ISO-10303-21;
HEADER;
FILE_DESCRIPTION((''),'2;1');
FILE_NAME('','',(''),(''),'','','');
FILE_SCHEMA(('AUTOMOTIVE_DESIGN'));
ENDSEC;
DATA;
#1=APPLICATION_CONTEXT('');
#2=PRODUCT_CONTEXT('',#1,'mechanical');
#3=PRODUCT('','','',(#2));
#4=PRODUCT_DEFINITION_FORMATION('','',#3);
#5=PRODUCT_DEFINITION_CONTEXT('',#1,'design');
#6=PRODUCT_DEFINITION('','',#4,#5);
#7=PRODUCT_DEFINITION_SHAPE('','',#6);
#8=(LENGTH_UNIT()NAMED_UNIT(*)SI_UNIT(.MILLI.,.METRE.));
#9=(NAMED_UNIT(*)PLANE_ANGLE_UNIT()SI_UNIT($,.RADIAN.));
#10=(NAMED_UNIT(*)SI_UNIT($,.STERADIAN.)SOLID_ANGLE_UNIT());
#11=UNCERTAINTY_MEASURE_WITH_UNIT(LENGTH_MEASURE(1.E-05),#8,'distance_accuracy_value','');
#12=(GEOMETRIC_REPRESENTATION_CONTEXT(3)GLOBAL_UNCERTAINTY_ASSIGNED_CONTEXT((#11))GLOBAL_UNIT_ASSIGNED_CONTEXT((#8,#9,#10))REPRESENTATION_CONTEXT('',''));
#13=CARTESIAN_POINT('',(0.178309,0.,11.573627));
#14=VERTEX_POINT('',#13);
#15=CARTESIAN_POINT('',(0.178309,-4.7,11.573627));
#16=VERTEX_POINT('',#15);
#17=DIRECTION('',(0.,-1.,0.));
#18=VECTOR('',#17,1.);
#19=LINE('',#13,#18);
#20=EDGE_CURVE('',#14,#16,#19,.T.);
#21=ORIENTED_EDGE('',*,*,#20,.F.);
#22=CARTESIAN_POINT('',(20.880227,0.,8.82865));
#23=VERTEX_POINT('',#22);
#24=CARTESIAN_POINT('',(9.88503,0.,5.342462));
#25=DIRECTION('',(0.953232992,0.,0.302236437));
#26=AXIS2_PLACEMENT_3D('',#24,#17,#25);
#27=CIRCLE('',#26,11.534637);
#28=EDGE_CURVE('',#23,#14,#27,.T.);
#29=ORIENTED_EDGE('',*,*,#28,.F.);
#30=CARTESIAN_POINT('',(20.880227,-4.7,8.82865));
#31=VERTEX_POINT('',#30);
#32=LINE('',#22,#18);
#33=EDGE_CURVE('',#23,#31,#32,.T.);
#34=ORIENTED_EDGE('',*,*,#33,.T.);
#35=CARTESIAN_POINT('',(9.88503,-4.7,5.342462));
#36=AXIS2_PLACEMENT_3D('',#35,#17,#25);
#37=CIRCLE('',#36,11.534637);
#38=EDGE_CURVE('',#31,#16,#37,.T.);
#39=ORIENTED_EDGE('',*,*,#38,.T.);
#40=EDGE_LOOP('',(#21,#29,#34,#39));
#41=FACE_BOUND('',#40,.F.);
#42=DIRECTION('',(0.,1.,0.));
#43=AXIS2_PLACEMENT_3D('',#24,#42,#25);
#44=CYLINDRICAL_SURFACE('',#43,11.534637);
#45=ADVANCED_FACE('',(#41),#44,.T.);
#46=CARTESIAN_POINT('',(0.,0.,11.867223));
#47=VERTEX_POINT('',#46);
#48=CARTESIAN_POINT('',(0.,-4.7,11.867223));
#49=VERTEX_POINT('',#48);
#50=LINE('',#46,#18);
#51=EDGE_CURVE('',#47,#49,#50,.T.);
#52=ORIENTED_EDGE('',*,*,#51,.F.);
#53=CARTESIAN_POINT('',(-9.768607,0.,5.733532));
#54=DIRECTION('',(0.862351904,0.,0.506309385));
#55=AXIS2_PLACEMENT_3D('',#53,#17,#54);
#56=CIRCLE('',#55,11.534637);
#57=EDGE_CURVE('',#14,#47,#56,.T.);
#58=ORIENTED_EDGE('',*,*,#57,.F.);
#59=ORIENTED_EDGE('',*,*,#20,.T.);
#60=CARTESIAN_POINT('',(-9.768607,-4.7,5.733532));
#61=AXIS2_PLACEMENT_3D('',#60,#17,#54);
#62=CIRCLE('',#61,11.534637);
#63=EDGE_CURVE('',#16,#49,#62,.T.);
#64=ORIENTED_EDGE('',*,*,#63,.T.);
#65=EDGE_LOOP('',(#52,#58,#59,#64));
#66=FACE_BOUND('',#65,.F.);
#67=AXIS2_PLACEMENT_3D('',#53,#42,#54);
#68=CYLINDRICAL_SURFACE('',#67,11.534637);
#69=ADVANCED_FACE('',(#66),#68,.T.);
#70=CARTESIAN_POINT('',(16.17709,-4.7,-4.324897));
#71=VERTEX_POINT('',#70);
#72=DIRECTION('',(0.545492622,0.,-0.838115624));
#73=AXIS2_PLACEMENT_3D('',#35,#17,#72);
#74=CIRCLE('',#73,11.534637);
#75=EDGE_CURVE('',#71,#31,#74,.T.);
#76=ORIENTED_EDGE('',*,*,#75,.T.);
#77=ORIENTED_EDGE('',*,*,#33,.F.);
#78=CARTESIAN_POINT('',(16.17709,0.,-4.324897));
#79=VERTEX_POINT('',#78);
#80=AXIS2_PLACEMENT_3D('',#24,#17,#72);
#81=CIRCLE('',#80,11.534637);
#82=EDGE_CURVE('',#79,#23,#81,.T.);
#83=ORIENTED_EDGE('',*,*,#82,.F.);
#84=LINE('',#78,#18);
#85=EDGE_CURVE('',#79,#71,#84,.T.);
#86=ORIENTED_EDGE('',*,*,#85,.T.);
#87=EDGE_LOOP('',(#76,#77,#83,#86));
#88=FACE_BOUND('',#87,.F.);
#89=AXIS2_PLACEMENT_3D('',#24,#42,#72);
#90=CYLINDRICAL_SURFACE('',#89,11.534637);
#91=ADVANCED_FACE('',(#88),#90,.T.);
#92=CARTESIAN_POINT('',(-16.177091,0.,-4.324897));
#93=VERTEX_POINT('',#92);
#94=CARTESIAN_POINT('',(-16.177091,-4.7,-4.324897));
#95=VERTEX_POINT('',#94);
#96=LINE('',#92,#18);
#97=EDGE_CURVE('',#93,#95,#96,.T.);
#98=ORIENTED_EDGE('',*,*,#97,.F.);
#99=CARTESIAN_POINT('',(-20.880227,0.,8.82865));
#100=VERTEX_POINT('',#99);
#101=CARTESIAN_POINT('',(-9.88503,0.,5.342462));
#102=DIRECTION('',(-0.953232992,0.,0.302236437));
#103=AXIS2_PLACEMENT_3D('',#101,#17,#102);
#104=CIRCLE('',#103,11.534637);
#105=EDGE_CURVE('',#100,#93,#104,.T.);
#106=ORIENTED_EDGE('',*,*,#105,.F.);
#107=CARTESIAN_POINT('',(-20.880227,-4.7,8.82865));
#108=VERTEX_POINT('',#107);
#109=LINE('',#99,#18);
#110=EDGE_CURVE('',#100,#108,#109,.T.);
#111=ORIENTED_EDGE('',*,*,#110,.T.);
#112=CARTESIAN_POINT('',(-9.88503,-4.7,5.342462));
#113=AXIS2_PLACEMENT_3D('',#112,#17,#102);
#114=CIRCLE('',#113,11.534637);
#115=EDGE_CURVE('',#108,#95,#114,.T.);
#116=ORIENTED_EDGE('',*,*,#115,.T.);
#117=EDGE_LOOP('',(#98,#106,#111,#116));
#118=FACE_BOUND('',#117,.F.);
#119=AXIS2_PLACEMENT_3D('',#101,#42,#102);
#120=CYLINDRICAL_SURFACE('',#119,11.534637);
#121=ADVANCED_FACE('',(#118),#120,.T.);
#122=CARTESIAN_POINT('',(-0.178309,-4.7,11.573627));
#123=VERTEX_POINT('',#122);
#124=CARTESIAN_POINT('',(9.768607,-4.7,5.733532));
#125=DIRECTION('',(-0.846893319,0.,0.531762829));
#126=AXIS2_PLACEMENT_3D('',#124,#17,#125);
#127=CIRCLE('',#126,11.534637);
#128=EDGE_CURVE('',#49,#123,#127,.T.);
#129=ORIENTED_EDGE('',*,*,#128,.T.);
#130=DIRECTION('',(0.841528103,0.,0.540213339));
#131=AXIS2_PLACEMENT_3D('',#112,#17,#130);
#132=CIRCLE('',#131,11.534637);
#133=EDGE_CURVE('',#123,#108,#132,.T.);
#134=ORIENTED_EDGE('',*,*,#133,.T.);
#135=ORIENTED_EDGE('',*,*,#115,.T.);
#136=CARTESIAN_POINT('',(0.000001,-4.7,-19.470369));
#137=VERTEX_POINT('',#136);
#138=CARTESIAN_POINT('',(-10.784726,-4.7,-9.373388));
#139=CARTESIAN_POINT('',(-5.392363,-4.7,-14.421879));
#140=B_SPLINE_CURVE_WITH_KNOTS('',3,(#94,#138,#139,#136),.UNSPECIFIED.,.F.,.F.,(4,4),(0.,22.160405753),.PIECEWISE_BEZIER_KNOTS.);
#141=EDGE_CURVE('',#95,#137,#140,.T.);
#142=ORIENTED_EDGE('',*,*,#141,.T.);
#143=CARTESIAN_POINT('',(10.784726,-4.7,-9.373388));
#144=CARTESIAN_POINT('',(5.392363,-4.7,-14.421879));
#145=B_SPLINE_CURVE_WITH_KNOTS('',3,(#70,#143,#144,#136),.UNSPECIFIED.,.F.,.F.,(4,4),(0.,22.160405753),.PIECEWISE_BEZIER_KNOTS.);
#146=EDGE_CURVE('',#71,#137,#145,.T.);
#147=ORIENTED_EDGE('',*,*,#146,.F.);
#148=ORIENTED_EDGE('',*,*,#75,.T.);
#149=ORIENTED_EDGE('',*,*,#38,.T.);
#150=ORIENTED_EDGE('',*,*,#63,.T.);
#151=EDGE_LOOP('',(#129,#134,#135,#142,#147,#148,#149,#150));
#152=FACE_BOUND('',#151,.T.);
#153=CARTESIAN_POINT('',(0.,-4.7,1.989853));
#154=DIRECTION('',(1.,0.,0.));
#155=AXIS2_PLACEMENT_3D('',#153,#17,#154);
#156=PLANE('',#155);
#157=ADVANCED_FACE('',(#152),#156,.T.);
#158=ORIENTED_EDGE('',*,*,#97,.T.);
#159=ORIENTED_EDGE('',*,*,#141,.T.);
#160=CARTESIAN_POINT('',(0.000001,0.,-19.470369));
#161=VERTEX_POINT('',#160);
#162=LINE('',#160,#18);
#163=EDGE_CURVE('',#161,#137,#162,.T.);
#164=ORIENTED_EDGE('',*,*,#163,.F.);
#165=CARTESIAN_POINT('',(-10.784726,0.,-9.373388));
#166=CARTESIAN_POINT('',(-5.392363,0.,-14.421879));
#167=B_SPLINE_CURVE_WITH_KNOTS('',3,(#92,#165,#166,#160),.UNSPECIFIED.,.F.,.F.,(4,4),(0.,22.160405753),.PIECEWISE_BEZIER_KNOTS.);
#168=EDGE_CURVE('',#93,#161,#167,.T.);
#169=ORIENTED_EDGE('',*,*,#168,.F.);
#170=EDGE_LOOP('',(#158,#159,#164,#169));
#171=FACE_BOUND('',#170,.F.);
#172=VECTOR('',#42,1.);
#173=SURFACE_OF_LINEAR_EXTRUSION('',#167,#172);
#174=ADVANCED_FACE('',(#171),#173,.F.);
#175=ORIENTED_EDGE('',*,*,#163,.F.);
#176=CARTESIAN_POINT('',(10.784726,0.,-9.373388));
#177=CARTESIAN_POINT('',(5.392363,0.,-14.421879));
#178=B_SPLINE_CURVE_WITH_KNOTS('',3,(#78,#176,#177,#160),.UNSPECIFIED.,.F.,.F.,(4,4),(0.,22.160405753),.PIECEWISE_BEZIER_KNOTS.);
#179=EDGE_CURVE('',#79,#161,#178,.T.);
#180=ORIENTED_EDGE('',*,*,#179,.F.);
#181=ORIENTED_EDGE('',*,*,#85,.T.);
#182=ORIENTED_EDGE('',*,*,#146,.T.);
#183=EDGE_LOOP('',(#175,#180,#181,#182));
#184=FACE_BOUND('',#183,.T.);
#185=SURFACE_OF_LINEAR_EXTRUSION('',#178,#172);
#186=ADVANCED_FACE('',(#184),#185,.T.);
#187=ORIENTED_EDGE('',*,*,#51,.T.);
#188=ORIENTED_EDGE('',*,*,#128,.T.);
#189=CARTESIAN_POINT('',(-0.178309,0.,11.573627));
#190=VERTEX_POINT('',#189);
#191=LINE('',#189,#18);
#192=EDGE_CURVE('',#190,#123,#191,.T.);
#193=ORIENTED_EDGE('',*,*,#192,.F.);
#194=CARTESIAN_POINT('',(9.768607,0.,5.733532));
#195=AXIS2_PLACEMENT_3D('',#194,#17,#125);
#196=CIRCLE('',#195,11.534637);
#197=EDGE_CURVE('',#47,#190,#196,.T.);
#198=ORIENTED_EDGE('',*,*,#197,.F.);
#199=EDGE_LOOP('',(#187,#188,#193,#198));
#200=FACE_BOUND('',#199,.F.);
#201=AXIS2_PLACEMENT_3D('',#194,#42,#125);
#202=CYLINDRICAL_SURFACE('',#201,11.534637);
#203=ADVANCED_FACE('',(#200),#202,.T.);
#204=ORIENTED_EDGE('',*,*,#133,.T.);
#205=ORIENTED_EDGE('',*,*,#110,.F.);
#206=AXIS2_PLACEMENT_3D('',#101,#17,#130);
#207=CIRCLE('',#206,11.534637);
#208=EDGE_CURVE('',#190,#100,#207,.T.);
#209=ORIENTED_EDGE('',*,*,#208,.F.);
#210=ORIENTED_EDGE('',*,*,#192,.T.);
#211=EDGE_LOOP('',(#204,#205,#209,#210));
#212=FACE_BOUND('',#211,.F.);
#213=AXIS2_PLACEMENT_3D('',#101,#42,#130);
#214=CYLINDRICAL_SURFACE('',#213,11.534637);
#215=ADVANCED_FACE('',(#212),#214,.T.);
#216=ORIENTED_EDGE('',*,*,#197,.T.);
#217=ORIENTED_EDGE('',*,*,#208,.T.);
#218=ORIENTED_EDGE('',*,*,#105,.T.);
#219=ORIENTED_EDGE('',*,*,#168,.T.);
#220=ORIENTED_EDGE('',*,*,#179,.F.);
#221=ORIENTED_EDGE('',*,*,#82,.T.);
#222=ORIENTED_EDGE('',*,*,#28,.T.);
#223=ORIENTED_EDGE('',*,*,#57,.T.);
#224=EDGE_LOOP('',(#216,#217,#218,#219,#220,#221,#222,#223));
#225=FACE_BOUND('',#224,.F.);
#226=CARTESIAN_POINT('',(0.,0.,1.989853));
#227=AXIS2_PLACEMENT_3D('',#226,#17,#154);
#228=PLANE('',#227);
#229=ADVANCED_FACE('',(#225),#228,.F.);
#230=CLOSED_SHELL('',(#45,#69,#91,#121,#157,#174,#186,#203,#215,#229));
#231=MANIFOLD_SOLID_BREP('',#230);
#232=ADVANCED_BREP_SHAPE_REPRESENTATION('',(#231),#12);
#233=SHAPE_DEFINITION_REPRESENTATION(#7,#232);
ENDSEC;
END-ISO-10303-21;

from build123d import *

# Parameters (mm, degrees)
F1_DEPTH = 4.7


# Not quite as in the source:
# - ends of sketch curves that miss each other by under 0.0002 mm in the source are joined


with BuildPart() as f1:
    # F0 (on Front) → F1 (new body)
    with BuildSketch(Plane.XZ):
        with BuildLine():
            ThreePointArc((0, 11.8672233933), (-0.0902475569, 11.7210890642), (-0.178309172, 11.5736271517))
            ThreePointArc((-0.178309172, 11.5736271517), (-11.401199024, 16.7770189855), (-20.8802270777, 8.8286499477))
            ThreePointArc((-20.8802270777, 8.8286499477), (-20.746257812, 1.4589596438), (-16.1770906643, -4.3248967268))
            add(Edge.make_bspline(
                [(-16.1770906643, -4.3248967268), (-10.7847263301, -9.3733878861), (-5.3923627754, -14.4218785382), (7.794e-07, -19.4703691903)],
                knots=[0, 0, 0, 0, 22.160405753, 22.160405753, 22.160405753, 22.160405753], degree=3))
            add(Edge.make_bspline(
                [(16.1770898849, -4.324897234), (10.7847263301, -9.3733878861), (5.3923627754, -14.4218785382), (7.794e-07, -19.4703691903)],
                knots=[0, 0, 0, 0, 22.160405753, 22.160405753, 22.160405753, 22.160405753], degree=3))
            ThreePointArc((16.1770898849, -4.324897234), (20.746257812, 1.4589596438), (20.8802270777, 8.8286499477))
            ThreePointArc((20.8802270777, 8.8286499477), (11.401199024, 16.7770189855), (0.178309172, 11.5736271517))
            ThreePointArc((0.178309172, 11.5736271517), (0.0902475569, 11.7210890642), (0, 11.8672233933))
        make_face()
    extrude(amount=F1_DEPTH)


solid = f1.part
